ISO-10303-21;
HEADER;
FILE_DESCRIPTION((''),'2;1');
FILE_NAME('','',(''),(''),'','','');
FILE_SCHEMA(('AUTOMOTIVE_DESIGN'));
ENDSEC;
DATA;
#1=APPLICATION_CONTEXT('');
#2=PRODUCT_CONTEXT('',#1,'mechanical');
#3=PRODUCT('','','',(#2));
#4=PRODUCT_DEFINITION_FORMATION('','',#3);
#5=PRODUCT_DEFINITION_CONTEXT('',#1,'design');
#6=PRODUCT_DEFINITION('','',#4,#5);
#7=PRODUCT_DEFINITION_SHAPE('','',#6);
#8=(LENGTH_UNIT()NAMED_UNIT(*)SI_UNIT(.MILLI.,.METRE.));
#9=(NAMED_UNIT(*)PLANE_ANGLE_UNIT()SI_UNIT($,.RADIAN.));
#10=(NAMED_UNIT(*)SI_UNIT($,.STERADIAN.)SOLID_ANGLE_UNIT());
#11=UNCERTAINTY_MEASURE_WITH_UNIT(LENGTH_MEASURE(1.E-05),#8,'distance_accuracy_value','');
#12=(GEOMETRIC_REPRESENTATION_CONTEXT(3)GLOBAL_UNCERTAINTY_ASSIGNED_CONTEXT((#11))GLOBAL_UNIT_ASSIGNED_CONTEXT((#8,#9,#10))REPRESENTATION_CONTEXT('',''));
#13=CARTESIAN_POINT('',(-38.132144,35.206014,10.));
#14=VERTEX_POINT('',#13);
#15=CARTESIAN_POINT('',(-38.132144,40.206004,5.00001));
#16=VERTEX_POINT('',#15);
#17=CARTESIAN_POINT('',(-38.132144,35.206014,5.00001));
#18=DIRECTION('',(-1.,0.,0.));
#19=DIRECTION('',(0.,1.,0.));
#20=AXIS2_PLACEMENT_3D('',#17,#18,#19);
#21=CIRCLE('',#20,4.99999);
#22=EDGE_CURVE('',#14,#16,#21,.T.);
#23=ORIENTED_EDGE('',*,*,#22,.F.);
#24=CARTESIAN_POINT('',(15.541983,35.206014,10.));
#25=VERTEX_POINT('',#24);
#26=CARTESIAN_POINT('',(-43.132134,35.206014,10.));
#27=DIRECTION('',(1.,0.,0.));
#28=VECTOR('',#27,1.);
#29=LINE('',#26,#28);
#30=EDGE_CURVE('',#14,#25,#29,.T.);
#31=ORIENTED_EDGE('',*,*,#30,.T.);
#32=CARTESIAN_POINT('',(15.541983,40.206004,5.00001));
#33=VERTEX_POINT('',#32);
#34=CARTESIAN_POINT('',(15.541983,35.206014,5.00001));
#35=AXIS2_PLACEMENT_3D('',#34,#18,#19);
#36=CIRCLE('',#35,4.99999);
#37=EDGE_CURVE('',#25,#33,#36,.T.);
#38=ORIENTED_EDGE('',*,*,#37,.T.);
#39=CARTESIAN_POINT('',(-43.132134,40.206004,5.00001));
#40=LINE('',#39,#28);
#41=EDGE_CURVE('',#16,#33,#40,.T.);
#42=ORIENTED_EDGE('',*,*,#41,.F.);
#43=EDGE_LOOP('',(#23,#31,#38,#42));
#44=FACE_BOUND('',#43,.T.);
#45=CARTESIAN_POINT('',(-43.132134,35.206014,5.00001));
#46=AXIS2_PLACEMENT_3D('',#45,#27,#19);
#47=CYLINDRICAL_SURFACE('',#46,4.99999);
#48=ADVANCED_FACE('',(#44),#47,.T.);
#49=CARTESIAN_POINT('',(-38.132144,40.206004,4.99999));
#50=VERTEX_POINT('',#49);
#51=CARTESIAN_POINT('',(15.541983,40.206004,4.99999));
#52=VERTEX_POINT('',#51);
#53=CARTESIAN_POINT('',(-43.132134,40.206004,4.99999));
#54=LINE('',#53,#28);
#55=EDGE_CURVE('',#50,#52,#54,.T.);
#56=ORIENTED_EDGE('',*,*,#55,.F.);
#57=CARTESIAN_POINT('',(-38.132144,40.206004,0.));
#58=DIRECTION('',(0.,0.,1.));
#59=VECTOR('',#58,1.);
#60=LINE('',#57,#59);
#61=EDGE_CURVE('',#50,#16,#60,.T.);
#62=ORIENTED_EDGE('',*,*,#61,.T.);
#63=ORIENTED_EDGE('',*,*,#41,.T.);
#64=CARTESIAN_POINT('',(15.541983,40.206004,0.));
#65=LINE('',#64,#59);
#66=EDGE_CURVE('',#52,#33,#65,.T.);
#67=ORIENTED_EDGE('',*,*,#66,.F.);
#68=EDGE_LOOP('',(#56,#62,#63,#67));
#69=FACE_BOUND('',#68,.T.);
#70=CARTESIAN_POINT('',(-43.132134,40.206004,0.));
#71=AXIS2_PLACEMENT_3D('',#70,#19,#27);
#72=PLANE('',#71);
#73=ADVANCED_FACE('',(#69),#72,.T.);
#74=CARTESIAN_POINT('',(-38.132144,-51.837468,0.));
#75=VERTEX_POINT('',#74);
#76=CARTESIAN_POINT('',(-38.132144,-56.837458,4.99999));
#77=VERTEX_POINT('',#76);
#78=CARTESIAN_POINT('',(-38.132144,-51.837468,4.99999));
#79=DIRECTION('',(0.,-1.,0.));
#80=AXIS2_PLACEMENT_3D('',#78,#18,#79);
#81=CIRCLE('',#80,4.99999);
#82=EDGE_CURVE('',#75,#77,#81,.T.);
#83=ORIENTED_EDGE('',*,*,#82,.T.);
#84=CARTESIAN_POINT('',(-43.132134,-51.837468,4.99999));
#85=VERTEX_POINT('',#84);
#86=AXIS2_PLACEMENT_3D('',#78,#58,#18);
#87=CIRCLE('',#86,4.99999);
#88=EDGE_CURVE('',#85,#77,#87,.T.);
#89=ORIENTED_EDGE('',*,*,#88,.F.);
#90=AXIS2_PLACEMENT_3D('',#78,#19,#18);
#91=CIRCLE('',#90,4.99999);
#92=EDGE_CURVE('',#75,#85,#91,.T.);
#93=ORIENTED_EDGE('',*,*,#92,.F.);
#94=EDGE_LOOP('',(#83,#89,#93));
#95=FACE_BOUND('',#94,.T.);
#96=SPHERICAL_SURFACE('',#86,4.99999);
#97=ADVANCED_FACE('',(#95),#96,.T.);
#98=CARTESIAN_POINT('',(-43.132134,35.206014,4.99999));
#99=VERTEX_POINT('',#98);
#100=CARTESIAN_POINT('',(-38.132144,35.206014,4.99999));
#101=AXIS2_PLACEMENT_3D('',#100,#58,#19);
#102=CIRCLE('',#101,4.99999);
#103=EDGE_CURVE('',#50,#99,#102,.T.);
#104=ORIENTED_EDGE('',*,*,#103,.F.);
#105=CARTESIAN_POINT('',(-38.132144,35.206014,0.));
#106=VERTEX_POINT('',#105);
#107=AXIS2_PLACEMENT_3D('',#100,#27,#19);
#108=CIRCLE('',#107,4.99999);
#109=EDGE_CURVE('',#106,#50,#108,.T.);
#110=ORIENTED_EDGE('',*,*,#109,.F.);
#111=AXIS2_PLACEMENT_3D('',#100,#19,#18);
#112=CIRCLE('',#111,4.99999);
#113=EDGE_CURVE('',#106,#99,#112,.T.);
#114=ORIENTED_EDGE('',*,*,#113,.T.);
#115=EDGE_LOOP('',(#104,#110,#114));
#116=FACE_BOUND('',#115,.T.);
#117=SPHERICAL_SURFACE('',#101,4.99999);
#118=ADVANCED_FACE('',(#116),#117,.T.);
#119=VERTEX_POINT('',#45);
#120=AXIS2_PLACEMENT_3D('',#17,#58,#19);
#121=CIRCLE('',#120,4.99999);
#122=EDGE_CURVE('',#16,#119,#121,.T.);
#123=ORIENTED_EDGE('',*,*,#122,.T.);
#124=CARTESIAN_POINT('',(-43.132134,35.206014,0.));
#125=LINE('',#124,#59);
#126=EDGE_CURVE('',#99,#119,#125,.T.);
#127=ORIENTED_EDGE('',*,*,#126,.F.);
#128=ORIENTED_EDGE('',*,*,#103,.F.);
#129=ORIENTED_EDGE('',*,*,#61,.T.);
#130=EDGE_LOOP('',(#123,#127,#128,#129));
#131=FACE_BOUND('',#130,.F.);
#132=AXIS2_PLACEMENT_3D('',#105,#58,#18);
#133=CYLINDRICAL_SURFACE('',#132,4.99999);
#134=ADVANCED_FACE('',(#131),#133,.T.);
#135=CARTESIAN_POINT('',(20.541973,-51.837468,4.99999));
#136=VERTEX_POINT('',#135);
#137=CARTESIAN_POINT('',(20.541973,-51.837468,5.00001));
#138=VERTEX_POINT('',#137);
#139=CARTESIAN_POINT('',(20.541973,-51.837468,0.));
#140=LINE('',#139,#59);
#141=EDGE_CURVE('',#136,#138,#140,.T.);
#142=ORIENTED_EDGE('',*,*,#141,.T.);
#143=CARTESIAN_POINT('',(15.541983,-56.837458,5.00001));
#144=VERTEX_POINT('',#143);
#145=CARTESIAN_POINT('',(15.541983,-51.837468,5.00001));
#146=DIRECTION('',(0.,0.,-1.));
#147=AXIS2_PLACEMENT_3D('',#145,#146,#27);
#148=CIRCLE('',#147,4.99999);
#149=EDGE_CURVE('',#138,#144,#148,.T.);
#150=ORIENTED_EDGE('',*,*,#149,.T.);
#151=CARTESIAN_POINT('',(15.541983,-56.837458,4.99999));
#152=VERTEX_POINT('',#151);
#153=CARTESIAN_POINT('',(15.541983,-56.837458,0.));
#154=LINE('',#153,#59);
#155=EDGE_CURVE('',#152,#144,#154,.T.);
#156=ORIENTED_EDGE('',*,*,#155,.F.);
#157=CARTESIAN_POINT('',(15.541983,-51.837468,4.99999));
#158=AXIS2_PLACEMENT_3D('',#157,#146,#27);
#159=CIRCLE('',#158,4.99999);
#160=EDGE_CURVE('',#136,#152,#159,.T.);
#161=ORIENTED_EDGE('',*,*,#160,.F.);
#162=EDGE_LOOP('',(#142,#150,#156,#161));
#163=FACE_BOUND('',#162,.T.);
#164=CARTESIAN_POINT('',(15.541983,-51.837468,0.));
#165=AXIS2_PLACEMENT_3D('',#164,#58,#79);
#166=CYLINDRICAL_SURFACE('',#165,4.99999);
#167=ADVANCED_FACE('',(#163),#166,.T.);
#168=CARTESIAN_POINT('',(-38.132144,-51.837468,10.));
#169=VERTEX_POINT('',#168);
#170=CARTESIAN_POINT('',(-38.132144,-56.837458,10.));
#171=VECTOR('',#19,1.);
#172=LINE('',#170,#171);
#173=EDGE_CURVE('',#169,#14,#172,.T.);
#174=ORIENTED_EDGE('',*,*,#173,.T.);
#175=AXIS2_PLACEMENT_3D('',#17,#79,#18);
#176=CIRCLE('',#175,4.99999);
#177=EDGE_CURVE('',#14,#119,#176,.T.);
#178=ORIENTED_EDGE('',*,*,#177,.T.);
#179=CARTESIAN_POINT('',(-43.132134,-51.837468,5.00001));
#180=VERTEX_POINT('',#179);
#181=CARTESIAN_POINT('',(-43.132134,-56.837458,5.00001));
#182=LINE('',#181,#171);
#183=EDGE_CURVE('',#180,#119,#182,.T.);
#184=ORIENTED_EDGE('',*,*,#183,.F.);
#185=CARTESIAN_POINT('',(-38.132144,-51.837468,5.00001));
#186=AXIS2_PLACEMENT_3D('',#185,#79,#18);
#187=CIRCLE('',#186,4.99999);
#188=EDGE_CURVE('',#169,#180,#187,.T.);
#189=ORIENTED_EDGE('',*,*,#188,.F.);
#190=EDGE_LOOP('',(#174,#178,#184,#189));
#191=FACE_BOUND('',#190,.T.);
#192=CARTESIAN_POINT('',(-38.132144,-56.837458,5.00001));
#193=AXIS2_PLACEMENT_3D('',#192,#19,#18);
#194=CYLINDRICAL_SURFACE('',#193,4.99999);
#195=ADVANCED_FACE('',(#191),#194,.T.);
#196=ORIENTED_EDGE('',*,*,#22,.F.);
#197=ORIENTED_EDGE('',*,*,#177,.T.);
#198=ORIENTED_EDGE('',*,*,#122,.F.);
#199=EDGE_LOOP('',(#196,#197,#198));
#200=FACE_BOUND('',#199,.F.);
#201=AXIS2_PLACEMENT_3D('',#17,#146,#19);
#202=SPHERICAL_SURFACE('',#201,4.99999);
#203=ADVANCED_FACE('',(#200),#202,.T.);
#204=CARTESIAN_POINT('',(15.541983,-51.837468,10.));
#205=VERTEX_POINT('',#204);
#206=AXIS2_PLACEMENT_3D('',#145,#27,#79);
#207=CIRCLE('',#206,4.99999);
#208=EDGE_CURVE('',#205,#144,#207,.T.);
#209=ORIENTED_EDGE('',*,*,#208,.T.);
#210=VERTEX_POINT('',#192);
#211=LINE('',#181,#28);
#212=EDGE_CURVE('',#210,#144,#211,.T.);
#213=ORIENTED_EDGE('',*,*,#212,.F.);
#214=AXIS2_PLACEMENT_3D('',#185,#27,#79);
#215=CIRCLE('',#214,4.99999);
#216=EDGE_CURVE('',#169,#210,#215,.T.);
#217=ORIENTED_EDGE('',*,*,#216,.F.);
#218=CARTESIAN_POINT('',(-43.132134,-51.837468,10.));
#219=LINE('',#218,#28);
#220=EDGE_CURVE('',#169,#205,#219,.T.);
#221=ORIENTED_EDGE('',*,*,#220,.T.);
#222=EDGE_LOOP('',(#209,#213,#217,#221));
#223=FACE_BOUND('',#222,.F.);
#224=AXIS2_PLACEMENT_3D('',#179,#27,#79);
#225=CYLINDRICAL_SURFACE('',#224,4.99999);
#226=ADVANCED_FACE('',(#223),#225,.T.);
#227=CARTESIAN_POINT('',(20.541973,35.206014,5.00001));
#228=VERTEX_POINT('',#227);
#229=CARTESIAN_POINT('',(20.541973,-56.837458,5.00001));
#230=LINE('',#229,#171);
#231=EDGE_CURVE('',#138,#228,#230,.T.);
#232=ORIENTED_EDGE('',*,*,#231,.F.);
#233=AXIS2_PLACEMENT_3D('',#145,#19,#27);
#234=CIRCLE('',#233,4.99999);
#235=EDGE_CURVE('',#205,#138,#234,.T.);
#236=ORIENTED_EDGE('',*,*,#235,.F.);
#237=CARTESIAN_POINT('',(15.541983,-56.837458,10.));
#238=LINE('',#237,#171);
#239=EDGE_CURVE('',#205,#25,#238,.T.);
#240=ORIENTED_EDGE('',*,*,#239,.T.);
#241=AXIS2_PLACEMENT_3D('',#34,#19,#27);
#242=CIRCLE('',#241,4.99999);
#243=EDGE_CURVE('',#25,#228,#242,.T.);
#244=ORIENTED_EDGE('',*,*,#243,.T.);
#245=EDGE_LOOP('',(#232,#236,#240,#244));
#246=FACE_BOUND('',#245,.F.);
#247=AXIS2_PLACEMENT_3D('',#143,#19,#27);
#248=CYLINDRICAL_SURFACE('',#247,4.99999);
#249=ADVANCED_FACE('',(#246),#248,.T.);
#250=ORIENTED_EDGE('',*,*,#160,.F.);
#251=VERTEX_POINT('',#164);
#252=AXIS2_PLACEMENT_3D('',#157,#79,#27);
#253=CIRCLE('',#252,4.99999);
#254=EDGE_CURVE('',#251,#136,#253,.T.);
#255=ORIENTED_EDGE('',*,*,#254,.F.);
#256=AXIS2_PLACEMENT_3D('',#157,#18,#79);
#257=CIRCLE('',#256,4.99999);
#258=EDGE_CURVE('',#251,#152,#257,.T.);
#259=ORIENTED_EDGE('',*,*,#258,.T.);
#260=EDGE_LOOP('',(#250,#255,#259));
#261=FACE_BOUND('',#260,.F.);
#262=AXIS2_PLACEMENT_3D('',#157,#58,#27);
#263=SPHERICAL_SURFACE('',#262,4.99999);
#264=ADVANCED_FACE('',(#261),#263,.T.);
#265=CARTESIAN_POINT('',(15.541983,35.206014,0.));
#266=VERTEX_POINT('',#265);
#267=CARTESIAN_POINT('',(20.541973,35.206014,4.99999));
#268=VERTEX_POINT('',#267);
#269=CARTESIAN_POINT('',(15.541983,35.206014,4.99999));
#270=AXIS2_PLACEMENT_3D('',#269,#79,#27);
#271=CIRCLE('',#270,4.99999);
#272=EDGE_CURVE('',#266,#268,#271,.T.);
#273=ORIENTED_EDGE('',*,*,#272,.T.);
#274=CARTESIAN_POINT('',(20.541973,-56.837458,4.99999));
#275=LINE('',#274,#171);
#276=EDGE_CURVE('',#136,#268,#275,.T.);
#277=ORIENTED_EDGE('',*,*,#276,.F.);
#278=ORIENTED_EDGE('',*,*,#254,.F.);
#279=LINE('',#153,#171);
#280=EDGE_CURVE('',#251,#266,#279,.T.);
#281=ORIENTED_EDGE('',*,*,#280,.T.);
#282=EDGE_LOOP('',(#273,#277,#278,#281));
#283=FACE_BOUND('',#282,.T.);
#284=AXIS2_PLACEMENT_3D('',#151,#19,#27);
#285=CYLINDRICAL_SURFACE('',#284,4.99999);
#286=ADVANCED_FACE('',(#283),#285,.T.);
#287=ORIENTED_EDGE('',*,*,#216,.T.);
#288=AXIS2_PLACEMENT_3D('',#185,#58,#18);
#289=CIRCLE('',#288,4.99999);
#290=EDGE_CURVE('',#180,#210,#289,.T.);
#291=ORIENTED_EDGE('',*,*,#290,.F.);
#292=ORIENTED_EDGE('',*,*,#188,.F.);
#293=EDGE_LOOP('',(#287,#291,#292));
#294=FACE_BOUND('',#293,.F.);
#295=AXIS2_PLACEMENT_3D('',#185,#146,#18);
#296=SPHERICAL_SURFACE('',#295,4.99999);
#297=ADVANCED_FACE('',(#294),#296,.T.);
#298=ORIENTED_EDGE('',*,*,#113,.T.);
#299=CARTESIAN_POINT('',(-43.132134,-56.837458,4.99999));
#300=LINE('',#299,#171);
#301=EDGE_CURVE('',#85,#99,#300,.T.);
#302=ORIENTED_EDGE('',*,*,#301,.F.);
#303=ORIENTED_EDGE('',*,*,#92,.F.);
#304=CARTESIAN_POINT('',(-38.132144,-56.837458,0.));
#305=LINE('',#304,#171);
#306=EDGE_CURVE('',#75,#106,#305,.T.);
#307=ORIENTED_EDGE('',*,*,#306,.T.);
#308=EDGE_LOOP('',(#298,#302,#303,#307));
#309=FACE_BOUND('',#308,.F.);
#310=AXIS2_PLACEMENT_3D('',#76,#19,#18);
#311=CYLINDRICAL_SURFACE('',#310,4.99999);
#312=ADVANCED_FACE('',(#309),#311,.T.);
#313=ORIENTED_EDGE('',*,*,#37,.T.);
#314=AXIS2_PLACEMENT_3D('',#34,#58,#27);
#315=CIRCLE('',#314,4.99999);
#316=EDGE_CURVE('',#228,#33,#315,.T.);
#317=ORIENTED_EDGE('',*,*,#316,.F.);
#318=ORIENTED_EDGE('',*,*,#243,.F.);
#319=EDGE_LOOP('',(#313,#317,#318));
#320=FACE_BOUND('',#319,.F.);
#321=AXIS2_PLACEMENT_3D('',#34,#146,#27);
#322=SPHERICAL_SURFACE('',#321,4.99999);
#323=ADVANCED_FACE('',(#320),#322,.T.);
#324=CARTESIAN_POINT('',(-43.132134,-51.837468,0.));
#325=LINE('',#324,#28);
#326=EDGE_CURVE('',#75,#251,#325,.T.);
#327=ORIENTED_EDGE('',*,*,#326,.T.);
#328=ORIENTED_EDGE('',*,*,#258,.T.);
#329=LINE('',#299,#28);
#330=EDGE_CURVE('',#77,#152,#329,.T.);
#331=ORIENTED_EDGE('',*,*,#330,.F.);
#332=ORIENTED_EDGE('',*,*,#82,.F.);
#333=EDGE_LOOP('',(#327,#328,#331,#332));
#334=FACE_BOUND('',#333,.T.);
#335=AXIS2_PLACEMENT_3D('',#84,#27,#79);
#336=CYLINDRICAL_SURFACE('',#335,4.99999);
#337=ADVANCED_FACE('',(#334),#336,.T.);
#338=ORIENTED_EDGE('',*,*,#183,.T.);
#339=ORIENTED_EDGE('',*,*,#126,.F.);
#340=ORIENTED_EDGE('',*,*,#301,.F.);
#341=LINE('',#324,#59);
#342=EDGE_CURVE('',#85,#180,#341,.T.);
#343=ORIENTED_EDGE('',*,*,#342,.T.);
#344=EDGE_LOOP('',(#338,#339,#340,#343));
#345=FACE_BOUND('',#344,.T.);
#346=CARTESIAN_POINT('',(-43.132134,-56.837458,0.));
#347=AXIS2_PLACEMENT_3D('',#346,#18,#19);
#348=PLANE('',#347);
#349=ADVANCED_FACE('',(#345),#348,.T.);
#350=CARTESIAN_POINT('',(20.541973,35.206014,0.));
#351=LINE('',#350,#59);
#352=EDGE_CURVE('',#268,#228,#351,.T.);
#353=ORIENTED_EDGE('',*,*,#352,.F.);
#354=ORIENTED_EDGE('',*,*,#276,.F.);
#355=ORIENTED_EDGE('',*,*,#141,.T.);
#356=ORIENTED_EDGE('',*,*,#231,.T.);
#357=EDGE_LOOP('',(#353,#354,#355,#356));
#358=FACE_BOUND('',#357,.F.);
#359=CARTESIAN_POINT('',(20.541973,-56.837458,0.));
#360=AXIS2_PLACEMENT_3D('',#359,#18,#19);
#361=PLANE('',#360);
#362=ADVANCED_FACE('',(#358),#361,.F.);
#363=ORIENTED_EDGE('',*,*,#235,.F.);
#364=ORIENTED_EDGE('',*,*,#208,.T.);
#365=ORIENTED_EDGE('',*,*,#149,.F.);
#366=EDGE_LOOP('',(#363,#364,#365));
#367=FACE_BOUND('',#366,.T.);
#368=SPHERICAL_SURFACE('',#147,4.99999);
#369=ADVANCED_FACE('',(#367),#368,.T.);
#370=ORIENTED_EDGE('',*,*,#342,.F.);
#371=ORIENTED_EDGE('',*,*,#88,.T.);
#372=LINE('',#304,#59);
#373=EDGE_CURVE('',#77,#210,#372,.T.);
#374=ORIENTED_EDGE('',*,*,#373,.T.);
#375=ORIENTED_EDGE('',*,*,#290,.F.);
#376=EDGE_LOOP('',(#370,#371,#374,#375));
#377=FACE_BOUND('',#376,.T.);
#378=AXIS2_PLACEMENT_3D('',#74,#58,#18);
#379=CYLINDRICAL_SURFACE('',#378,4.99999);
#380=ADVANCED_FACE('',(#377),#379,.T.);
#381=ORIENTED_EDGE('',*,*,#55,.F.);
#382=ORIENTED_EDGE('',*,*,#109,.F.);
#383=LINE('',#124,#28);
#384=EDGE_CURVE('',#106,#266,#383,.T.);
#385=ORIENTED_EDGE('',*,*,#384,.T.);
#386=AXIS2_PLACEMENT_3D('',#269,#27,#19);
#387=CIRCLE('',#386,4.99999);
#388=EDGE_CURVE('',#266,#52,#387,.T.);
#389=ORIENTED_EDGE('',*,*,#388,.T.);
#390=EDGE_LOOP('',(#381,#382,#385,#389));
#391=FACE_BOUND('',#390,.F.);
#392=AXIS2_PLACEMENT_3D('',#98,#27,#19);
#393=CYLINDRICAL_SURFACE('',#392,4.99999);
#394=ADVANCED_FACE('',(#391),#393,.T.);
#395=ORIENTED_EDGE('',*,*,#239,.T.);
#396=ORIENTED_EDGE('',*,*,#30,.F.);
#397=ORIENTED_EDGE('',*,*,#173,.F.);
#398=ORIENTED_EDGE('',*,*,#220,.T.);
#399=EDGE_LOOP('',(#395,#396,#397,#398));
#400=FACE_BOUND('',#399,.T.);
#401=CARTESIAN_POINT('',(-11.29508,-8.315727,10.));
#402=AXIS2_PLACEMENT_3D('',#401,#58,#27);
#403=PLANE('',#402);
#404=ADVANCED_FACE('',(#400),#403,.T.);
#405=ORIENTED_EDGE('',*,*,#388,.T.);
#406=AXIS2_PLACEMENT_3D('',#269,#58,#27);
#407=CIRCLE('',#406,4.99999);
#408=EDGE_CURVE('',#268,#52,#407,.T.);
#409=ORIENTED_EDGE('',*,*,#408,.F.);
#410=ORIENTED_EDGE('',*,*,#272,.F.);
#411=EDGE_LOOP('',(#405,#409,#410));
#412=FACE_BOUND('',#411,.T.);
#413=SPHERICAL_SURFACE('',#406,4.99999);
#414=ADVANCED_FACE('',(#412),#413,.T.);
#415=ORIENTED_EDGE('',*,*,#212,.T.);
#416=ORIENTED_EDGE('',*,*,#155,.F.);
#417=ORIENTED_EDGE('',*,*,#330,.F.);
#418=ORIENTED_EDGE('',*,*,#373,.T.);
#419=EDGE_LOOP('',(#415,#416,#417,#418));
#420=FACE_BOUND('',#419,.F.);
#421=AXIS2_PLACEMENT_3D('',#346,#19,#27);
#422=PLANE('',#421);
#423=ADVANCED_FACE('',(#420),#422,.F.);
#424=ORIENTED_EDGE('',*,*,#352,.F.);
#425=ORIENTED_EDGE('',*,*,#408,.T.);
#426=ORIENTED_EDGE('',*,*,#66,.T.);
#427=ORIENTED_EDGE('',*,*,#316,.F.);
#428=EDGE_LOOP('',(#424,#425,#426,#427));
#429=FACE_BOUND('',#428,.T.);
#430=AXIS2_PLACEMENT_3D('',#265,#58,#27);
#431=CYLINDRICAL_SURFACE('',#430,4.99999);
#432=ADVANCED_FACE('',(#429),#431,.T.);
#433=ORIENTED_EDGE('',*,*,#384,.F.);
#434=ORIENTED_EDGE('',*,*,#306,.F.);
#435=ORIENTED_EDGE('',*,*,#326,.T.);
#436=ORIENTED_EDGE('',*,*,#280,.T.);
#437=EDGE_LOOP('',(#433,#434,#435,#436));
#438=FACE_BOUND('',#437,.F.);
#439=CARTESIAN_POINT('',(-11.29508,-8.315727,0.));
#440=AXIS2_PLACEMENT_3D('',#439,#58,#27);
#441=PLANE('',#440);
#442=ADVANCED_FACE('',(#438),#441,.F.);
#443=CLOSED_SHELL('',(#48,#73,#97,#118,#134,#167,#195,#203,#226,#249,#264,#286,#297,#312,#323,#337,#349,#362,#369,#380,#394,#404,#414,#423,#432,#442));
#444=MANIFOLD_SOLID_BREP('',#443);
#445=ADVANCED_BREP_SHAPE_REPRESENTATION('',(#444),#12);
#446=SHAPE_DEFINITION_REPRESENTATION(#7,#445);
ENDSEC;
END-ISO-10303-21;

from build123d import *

# Parameters (mm, degrees)
F0_W     = 63.6741071939
F0_H     = 97.0434620976
F1_DEPTH = 10
F2_R     = 4.99999


# Not quite as in the source:
# - a fillet or chamfer is up to 0.001 mm smaller than in the source, because OpenCascade refuses the exact size


with BuildPart() as f1:
    # F0 (on Top) → F1 (new body)
    with BuildSketch(Plane.XY):
        with Locations((-11.2950801849, -8.3157271147)):
            Rectangle(F0_W, F0_H)
    extrude(amount=F1_DEPTH)

    # F2 (radius 5 in the source; OpenCascade refuses exactly that, so slightly less here)
    f2_edges = [f1.edges().sort_by_distance(p)[0] for p in [
        (20.541973, -56.837458, 5),
        (20.541973, 40.206004, 5),
        (20.541973, -8.315727, 0),
        (20.541973, -8.315727, 10),
        (-43.132134, 40.206004, 5),
        (-11.29508, 40.206004, 0),
        (-11.29508, 40.206004, 10),
        (-43.132134, -56.837458, 5),
        (-43.132134, -8.315727, 0),
        (-43.132134, -8.315727, 10),
        (-11.29508, -56.837458, 0),
        (-11.29508, -56.837458, 10),
    ]]
    fillet(f2_edges, radius=F2_R)


solid = f1.part
